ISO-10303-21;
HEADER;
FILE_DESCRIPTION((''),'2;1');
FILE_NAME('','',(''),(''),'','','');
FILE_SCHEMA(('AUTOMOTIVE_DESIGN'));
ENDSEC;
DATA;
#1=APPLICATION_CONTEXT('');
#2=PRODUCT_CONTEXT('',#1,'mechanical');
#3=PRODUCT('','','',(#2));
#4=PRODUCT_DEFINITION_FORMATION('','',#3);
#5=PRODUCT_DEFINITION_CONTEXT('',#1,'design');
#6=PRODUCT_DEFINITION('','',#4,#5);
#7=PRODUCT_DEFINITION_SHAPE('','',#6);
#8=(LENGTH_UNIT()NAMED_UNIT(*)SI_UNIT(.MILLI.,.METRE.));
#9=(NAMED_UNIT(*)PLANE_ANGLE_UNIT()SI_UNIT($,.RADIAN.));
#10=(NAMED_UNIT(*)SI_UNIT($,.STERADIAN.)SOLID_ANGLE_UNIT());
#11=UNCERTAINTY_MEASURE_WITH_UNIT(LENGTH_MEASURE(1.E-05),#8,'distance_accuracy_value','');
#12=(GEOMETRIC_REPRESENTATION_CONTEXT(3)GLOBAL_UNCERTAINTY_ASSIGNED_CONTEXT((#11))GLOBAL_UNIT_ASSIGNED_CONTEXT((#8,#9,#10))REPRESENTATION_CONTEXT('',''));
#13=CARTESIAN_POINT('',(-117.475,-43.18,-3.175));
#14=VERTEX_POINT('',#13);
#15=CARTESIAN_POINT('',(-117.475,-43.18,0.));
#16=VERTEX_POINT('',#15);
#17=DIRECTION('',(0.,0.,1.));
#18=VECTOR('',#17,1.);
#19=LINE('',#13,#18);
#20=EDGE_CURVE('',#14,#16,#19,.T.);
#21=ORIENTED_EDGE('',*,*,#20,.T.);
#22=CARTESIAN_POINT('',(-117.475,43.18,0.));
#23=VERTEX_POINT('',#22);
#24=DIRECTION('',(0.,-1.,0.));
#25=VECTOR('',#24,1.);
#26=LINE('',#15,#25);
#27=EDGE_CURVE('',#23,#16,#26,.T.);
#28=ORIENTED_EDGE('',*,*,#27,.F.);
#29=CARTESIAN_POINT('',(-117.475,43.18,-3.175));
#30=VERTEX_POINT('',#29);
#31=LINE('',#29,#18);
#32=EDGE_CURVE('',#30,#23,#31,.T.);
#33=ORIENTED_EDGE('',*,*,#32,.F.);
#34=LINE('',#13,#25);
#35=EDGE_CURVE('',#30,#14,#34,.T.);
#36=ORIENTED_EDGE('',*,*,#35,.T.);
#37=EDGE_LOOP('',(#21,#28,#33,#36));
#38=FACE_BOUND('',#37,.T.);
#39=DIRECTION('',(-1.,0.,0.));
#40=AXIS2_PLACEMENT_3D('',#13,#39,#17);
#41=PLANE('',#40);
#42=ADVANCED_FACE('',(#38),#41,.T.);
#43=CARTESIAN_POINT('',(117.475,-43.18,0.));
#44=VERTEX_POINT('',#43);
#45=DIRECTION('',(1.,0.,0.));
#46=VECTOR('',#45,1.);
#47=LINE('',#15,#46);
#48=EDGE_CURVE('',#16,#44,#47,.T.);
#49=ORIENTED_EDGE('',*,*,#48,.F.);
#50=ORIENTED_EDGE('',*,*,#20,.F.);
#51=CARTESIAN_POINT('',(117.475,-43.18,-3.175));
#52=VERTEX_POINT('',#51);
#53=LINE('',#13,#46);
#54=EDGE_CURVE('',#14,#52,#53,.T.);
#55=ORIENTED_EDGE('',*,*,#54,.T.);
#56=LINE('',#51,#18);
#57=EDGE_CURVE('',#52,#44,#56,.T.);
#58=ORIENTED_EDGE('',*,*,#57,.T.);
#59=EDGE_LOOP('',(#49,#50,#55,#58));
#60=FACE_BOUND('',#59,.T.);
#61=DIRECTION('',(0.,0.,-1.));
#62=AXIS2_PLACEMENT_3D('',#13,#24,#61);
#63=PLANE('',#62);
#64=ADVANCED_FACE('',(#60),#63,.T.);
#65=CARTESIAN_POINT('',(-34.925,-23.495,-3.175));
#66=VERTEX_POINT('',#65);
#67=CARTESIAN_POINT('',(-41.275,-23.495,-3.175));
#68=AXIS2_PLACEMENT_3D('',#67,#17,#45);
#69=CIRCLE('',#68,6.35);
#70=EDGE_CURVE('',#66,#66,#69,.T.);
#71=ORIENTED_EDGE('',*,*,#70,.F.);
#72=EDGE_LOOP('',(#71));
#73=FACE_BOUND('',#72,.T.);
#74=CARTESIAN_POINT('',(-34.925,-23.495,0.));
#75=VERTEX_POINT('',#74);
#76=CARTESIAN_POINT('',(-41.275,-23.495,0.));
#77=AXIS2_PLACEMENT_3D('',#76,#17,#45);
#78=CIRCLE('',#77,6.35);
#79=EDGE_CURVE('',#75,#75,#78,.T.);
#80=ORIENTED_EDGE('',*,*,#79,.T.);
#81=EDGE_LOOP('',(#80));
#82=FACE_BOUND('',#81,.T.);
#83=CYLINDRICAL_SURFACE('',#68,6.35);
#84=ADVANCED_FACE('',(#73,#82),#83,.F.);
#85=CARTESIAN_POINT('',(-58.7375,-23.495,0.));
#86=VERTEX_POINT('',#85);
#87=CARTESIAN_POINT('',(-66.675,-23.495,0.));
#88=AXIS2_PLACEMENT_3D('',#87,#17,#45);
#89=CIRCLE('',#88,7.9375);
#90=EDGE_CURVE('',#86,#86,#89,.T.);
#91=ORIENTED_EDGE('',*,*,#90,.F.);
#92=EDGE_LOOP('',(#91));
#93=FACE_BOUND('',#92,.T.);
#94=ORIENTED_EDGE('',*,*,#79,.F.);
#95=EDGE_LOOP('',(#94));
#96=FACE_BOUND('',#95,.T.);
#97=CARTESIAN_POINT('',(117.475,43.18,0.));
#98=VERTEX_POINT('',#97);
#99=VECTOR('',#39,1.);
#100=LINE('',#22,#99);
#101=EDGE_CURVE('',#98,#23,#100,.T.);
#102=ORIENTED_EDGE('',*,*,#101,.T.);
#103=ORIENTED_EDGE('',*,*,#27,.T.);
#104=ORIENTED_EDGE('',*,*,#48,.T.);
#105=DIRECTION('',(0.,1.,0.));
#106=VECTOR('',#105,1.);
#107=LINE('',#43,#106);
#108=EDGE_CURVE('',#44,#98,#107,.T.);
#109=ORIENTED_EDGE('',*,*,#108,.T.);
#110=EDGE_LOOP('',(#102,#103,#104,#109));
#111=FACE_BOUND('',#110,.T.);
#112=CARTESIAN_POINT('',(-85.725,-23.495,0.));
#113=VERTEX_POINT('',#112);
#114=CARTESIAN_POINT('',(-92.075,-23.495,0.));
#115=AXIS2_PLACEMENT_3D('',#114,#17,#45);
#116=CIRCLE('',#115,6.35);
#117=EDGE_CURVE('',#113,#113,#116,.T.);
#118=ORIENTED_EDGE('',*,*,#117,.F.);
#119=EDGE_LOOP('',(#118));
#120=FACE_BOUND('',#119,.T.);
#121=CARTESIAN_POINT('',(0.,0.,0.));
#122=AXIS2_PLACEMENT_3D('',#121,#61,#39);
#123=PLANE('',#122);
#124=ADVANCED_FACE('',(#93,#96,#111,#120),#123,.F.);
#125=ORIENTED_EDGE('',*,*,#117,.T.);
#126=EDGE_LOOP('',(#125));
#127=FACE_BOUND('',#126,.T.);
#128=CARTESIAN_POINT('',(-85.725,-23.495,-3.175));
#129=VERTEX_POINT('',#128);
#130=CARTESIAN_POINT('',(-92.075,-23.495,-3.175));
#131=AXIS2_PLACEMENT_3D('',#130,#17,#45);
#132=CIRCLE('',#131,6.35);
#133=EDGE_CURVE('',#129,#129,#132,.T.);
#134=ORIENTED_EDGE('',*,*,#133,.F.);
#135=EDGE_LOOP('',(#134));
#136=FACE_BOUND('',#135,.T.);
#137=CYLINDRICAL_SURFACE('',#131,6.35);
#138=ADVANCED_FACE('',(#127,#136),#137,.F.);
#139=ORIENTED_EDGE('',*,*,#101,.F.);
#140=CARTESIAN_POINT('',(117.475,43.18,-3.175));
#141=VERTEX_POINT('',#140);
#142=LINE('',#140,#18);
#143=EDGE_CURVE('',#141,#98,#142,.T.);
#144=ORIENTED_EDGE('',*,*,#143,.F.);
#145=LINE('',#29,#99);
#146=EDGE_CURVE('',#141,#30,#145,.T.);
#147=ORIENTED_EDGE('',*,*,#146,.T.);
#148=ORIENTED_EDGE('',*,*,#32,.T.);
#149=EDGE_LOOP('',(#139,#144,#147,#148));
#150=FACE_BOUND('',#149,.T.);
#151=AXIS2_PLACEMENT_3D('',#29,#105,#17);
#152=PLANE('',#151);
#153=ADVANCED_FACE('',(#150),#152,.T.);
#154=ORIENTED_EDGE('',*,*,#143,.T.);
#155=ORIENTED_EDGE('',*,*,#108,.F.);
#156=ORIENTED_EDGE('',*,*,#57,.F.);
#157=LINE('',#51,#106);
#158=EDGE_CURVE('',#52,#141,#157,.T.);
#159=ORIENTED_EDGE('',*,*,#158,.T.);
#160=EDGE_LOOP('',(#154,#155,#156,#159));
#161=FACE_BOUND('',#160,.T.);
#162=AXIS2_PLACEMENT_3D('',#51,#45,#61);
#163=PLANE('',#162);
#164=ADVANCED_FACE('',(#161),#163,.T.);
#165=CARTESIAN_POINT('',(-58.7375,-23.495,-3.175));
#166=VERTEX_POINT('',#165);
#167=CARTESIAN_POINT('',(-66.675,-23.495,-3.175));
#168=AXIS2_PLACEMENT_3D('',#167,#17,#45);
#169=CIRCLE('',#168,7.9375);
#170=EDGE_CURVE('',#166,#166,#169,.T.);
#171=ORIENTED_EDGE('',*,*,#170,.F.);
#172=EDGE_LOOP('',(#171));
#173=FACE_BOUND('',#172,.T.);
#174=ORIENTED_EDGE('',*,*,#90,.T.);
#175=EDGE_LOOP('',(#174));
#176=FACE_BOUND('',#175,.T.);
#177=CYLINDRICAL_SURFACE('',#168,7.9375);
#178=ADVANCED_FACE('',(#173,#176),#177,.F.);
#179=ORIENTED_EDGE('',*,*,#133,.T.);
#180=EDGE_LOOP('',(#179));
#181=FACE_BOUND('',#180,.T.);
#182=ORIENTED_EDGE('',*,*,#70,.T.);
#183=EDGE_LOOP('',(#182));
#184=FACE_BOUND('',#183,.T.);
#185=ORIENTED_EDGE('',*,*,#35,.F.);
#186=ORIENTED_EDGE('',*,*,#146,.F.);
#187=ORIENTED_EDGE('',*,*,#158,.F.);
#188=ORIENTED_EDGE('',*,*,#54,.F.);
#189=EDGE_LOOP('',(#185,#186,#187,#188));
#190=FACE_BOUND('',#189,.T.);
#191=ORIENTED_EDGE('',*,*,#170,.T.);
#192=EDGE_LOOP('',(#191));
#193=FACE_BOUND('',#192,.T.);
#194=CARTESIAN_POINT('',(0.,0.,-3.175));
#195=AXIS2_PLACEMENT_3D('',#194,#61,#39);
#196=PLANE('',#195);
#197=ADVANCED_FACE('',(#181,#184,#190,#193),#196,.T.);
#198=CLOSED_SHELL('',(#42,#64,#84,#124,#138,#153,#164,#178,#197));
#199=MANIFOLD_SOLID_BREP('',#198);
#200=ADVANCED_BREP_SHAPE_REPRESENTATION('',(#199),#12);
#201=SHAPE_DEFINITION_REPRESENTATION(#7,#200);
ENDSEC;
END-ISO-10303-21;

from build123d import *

# Parameters (mm, degrees)
SKETCH1_W          = 234.95
SKETCH1_H          = 86.36
BASE_FLANGE1_DEPTH = 3.175
SKETCH11_R         = 7.9375
CUT_EXTRUDE3_DEPTH = 126.199715056
SKETCH13_R         = 6.35
CUT_EXTRUDE5_DEPTH = 126.199715056
SKETCH14_R         = 6.35
CUT_EXTRUDE6_DEPTH = 126.199715056


# Sheet-metal steps are written as plain solids
with BuildPart() as part:
    # Sketch1 → Base-Flange1 (new body)
    with BuildSketch(Plane.XY):
        Rectangle(SKETCH1_W, SKETCH1_H)
    extrude(amount=-BASE_FLANGE1_DEPTH)

    # Sketch11 → Cut-Extrude3 (cut, through all)
    with BuildSketch(Plane.XY):
        with Locations((-66.675, -23.495)):
            Circle(SKETCH11_R)
    extrude(amount=-CUT_EXTRUDE3_DEPTH, mode=Mode.SUBTRACT)

    # Sketch13 → Cut-Extrude5 (cut, through all)
    with BuildSketch(Plane.XY):
        with Locations((-41.275, -23.495)):
            Circle(SKETCH13_R)
    extrude(amount=-CUT_EXTRUDE5_DEPTH, mode=Mode.SUBTRACT)

    # Sketch14 → Cut-Extrude6 (cut, through all)
    with BuildSketch(Plane.XY):
        with Locations((-92.075, -23.495)):
            Circle(SKETCH14_R)
    extrude(amount=-CUT_EXTRUDE6_DEPTH, mode=Mode.SUBTRACT)


solid = part.part
